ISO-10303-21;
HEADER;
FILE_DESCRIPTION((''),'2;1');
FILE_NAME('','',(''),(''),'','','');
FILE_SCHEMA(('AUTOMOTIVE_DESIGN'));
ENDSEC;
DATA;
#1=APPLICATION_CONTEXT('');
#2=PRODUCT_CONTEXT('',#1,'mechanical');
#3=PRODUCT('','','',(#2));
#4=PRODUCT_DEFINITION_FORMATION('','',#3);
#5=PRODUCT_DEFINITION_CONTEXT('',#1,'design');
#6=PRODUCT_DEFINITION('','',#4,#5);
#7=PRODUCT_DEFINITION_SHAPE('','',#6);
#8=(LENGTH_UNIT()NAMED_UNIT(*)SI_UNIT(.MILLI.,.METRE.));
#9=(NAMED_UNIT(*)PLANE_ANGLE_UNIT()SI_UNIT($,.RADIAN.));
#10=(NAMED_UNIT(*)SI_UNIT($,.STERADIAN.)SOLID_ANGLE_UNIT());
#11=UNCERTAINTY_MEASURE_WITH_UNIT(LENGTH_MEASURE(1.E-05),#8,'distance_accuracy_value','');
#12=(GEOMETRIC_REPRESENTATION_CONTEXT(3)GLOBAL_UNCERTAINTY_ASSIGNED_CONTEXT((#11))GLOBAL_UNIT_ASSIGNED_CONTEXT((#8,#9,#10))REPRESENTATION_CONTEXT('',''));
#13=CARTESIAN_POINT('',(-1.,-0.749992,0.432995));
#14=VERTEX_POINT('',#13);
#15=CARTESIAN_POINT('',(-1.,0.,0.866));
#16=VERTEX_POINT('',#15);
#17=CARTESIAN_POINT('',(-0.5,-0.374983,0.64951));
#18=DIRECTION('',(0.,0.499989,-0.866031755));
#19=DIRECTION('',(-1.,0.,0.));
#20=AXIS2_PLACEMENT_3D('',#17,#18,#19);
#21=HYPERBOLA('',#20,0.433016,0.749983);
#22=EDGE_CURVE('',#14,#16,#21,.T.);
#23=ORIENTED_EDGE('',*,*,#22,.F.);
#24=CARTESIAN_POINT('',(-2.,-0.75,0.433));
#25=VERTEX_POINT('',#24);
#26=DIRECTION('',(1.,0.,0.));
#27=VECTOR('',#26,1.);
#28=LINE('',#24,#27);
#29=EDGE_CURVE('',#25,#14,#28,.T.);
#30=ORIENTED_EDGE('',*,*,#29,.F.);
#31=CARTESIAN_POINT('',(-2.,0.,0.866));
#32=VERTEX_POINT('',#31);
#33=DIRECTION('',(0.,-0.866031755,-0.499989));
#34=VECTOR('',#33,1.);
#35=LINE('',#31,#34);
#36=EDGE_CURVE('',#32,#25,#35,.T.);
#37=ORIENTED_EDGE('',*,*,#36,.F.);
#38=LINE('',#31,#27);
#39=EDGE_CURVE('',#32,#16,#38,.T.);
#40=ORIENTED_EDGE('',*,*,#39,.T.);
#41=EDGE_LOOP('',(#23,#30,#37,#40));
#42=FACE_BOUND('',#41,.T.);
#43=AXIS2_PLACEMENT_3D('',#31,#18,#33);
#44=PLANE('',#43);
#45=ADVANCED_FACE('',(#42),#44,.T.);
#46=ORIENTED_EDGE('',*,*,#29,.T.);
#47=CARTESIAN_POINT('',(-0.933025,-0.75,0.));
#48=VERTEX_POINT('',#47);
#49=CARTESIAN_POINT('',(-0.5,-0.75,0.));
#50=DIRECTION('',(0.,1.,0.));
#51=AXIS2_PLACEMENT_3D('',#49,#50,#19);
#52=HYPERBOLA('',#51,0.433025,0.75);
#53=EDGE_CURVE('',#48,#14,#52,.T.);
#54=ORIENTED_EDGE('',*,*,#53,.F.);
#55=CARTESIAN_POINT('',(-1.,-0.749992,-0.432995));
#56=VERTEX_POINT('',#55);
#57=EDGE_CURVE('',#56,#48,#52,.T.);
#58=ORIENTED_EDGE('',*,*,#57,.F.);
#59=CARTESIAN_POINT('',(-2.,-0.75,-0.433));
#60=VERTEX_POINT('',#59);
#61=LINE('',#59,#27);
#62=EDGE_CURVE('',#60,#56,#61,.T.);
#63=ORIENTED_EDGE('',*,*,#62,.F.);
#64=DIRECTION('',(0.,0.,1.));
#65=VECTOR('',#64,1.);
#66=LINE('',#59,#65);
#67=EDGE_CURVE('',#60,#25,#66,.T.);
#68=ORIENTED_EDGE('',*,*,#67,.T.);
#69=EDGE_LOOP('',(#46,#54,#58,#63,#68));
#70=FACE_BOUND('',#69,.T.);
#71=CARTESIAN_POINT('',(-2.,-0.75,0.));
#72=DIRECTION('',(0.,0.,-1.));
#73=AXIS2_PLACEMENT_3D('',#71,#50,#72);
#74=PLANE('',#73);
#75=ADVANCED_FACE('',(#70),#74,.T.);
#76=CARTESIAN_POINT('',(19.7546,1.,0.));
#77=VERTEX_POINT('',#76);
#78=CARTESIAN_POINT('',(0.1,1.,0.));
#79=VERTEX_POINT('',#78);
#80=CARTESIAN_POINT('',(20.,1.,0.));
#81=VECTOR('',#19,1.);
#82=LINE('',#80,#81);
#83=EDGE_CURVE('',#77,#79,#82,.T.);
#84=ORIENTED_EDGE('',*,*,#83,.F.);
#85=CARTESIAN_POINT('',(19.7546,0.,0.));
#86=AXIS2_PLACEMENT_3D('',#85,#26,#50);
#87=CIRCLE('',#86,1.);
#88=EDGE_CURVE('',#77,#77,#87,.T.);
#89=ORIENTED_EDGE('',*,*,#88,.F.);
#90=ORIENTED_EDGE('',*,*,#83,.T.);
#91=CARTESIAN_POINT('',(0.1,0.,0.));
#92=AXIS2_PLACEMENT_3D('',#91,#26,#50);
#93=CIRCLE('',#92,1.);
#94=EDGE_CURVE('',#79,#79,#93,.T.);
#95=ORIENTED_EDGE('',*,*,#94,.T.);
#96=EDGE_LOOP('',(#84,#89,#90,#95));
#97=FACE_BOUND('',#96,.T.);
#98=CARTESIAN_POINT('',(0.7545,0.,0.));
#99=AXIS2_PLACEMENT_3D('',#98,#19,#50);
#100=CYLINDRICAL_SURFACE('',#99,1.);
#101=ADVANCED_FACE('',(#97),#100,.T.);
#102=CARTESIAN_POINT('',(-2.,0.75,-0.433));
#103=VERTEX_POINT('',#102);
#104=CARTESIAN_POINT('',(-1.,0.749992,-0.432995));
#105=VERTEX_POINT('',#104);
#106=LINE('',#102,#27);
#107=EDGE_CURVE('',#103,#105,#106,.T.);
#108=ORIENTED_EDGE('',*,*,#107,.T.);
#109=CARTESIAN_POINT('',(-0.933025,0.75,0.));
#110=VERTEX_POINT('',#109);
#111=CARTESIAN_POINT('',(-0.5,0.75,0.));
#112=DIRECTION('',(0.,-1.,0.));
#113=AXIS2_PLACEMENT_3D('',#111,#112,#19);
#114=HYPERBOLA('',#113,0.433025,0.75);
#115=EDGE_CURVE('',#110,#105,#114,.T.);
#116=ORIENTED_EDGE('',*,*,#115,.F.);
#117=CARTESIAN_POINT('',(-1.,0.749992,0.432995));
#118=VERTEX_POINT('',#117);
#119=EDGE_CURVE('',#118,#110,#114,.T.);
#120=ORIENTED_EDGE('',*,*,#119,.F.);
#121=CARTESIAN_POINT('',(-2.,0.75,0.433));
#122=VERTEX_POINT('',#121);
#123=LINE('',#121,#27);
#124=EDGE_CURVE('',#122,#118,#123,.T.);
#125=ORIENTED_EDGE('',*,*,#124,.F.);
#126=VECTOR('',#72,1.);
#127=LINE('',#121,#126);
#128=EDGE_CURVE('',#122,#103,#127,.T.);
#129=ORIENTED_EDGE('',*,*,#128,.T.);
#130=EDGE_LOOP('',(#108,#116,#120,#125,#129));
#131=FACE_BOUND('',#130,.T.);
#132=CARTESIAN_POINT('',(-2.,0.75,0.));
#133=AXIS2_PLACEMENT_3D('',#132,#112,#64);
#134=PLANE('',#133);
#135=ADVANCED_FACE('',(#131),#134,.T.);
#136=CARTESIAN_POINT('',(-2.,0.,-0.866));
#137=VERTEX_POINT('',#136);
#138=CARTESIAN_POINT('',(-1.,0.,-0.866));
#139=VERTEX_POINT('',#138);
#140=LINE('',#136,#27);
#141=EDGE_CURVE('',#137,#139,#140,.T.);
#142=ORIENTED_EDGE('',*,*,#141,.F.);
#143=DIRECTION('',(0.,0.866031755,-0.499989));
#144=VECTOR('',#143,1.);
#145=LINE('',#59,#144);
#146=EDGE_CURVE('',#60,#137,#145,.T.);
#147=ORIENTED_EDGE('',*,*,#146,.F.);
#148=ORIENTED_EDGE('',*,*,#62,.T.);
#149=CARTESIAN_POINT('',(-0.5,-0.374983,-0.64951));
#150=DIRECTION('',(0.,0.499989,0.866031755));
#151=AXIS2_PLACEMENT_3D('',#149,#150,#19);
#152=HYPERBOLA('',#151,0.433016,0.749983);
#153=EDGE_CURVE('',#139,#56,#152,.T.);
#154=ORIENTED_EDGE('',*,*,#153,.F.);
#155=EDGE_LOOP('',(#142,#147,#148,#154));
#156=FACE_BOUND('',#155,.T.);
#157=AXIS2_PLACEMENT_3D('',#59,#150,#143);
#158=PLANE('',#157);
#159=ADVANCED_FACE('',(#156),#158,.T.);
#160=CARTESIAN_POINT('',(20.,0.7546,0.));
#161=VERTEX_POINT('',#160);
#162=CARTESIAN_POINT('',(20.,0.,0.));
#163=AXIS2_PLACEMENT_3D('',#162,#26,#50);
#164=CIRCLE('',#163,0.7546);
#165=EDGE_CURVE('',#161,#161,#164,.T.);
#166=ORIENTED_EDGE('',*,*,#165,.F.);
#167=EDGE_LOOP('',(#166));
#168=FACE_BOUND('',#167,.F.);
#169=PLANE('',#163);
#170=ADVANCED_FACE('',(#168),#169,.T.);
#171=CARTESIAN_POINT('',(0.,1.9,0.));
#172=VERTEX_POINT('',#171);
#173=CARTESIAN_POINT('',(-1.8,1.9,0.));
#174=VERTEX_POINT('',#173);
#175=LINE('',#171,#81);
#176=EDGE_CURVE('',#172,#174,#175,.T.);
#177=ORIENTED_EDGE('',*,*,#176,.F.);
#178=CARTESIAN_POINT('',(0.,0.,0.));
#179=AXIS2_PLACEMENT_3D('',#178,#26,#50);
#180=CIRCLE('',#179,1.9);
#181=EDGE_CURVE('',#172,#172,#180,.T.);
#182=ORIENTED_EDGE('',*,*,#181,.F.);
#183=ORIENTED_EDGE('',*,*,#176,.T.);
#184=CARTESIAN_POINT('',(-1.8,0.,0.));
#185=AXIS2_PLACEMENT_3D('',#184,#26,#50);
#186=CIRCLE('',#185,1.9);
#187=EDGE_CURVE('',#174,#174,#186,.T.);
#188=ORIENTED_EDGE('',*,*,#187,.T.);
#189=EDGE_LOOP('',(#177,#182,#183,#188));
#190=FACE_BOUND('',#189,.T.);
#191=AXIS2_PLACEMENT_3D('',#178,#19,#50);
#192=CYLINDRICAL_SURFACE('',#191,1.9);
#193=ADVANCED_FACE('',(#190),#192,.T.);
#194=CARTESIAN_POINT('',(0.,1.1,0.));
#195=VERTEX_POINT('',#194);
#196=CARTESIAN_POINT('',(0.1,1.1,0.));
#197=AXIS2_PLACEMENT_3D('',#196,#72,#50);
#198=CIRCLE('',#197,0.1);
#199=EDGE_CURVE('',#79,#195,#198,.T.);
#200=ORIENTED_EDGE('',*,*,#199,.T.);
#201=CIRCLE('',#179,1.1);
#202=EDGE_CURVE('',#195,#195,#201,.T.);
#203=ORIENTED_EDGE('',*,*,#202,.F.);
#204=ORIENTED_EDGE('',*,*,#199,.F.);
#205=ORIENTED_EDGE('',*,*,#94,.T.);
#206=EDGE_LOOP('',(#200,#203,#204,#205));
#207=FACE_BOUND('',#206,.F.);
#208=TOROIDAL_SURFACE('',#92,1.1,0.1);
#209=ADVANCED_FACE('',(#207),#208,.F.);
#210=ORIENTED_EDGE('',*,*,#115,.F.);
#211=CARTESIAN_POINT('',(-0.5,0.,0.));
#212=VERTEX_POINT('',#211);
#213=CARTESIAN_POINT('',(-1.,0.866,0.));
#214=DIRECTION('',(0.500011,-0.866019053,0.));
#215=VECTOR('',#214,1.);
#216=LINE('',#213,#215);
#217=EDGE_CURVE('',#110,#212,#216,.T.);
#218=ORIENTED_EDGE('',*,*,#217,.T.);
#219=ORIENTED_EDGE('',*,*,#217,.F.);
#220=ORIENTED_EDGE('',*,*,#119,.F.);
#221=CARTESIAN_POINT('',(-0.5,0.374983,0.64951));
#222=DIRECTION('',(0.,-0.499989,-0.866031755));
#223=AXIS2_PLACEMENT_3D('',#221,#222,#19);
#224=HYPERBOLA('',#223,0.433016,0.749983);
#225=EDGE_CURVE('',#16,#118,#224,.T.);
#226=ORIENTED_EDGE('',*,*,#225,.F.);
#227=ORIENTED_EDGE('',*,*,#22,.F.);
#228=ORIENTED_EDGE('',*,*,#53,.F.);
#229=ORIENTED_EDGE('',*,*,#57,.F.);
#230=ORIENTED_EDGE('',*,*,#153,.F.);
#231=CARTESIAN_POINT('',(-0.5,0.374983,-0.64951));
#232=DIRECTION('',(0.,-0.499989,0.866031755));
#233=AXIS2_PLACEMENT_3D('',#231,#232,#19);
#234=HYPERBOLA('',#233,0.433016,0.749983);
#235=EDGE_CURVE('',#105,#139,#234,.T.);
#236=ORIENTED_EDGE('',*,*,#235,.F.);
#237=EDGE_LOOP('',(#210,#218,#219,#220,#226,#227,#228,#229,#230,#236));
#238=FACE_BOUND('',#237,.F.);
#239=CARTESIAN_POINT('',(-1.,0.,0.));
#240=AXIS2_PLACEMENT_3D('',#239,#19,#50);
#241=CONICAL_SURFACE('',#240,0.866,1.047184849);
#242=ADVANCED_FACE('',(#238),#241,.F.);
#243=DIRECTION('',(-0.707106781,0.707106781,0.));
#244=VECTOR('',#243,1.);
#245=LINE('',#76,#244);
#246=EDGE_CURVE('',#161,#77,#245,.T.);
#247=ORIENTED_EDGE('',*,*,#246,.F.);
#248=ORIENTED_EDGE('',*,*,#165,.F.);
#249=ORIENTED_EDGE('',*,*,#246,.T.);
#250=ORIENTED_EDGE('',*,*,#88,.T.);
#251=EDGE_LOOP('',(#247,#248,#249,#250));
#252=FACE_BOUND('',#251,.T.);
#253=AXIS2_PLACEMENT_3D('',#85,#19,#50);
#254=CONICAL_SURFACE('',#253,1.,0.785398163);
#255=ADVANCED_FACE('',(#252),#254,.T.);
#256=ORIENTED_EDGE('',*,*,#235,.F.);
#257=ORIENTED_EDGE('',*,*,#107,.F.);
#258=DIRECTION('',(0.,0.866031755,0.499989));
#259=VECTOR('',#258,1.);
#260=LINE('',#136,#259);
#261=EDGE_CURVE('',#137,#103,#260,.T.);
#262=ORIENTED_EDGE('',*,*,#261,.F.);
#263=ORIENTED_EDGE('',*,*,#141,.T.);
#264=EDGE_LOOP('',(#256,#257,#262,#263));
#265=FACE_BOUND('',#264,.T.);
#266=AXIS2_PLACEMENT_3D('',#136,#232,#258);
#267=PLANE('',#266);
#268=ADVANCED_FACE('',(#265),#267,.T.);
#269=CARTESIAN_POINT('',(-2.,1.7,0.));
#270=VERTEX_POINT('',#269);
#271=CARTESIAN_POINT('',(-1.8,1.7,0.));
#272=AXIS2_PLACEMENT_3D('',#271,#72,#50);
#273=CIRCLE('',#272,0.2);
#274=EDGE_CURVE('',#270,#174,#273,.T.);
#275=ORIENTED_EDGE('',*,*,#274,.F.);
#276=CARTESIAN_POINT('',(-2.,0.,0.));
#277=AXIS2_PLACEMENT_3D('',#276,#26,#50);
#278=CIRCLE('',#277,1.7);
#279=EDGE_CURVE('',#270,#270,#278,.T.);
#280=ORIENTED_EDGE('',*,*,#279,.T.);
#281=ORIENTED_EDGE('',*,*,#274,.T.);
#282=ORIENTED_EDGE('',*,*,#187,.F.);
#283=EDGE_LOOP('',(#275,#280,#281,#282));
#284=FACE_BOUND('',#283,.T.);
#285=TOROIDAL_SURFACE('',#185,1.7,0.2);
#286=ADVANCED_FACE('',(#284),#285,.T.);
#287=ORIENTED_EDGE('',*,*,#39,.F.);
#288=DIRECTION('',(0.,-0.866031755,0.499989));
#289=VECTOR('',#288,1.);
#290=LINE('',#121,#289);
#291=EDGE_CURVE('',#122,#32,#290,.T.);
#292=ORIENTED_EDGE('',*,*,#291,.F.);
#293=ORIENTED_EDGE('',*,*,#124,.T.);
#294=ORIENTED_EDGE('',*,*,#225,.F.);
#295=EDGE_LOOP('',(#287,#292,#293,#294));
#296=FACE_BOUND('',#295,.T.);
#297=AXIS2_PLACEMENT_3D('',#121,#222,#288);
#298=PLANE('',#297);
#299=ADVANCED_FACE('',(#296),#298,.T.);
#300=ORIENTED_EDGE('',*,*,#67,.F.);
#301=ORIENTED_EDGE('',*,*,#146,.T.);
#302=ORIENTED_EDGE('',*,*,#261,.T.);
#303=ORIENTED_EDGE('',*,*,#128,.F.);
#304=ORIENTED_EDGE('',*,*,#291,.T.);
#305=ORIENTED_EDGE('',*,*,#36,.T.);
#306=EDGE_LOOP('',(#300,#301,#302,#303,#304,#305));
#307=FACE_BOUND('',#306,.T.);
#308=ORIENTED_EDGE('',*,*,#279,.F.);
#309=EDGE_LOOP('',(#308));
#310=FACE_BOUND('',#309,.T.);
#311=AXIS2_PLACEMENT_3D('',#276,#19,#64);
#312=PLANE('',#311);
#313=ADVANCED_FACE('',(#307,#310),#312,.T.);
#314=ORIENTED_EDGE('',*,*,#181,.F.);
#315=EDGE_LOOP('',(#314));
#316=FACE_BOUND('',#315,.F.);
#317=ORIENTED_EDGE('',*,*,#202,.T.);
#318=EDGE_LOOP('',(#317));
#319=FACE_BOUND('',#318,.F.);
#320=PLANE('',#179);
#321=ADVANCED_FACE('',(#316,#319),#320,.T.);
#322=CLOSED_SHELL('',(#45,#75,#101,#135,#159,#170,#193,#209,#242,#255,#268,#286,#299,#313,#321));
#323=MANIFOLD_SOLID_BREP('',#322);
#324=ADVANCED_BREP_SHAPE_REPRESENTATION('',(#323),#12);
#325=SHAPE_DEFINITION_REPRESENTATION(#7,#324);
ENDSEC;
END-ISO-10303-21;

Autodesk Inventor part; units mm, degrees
ref_plane "YZ Plane" through (0, 0, 0) normal (1, 0, 0) x (0, 1, 0)
ref_plane "XZ Plane" through (0, 0, 0) normal (0, 1, 0) x (-1, 0, 0)
sketch "Skizze1" plane through (0, 0, 0) normal (0, 0, 1) x (1, 0, 0)
  line L0 (-0.5, 0) -> (20, 0)
  line L1 (20, 0) -> (20, 1)
  line L2 (20, 1) -> (1, 1)
  line L3 (1, 1) -> (0.7545, 1)
  line L4 (0.7545, 1) -> (0, 1)
  line L5 (0, 1) -> (0, 1.9)
  line L6 (0, 1.9) -> (-2, 1.9)
  line L7 (-2, 1.9) -> (-2, 0.866)
  line L8 (-2, 0.866) -> (-1, 0.866)
  line L9 (-1, 0.866) -> (-0.5, 0)
  line L10 (-6.4, 0) -> (24.4, 0) projected
  line L11 (0, -0.38) -> (0, 2.28) projected
  line L12 (1, 1) -> (0, 1) construction
  dimension "d1" = 19
  dimension "d2" = 0.2455
  dimension "d3" = 2
  dimension "d4" = 1
  dimension "d5" = 60
  dimension "d6" = 2
  dimension "d7" = 2
  dimension "d8" = 1.7321
  dimension "d9" = 3.8
  dimension "d26" = 20
revolve "Körper" add sketch "Skizze1" angle 360 about axis through (-0.5, 0, 0) along (1, 0, 0)
sketch "Skizze2" plane through (-2, 0, 0) normal (-1, 0, 0) x (0, 0, 1)
  circle A0 centre (0, 0) radius 0.866 projected
  line L0 (0, -2.66) -> (0, 2.66) projected
  line L1 (-2.66, 0) -> (2.66, 0) projected
  line L2 (0.866, 0) -> (0.433, -0.75)
  line L3 (0.433, -0.75) -> (-0.433, -0.75)
  line L4 (-0.433, -0.75) -> (-0.866, 0)
  line L5 (-0.866, 0) -> (-0.433, 0.75)
  line L6 (-0.433, 0.75) -> (0.433, 0.75)
  line L7 (0.433, 0.75) -> (0.866, 0)
extrude "Loch" add sketch "Skizze2" against normal up to next contours L7 A0 | A0 L2 | L6 L0 A0 | A0 L0 L3 | L0 L6 A0 | A0 L3 L0 | L4 A0 | A0 L5
fillet "Rundung1" radius 0.2 1 edges at (-2, -1.9, 0)
thread "Gewinde" size "M2x0.4" class "6g" standard "ISO Metric profile" length 19
chamfer "Fase1" distance 0.2454 distance2 0.2454 1 edges at (20, -1, 0) measured on face at (20, -0.4443, -0.4503)
ref_plane "Work Plane1" through (29, 0, 0) normal (0, -1, 0) x (1, 0, 0)
fillet "Fillet2" radius 0.1 1 edges at (0, -1, 0)
equation "\"d1\" = GEL"
equation "\"d3\" = KOH"
equation "\"d4\" = INTI"
equation "\"d6\" = GD"
equation "\"d7\" = BDM"
equation "\"d8\" = 1.1547 * SW"
equation "\"d9\" = KOD"
equation "\"d26\" = NLG"
equation "\"d30\" = R"
equation "\"d17\" = RR"
equation "\"d13\" = GEL"
equation "\"d15\" = -0.5 * SPD + 0.5 * GD"
equation "\"d16\" = GUL"
equation "\"GD\" = NND"
equation "\"NLG\" = 20"
equation "\"GEL\" = 19"
equation "\"KOD\" = 3.8"
equation "\"KOH\" = 2"
equation "\"INTI\" = 1"
equation "\"GAL\" = 0.61345 * PTC"
equation "\"GUL\" = 0.61345 * PTC"
equation "\"BDM\" = NND"
equation "\"SW\" = 1.5"
equation "\"RR\" = 0.2"
equation "\"SPD\" = NND - 1.2269 * PTC"
equation "\"R\" = 0.1"
equation "\"TOA\" = 30deg"
equation "\"GD1\" = THREADDIA - 1.2269 * PTC"
equation "\"THREADDIA\" = 2"
equation "\"FAWI\" = 45deg"
equation "\"ANG\" = 120deg"
equation "\"PTC\" = 0.4"
equation "\"NND\" = 2"
equation "\"E0\" = 1.155 * SW"
properties part number "DIN 912 - M2 x 20" material "Stahl, weich"
